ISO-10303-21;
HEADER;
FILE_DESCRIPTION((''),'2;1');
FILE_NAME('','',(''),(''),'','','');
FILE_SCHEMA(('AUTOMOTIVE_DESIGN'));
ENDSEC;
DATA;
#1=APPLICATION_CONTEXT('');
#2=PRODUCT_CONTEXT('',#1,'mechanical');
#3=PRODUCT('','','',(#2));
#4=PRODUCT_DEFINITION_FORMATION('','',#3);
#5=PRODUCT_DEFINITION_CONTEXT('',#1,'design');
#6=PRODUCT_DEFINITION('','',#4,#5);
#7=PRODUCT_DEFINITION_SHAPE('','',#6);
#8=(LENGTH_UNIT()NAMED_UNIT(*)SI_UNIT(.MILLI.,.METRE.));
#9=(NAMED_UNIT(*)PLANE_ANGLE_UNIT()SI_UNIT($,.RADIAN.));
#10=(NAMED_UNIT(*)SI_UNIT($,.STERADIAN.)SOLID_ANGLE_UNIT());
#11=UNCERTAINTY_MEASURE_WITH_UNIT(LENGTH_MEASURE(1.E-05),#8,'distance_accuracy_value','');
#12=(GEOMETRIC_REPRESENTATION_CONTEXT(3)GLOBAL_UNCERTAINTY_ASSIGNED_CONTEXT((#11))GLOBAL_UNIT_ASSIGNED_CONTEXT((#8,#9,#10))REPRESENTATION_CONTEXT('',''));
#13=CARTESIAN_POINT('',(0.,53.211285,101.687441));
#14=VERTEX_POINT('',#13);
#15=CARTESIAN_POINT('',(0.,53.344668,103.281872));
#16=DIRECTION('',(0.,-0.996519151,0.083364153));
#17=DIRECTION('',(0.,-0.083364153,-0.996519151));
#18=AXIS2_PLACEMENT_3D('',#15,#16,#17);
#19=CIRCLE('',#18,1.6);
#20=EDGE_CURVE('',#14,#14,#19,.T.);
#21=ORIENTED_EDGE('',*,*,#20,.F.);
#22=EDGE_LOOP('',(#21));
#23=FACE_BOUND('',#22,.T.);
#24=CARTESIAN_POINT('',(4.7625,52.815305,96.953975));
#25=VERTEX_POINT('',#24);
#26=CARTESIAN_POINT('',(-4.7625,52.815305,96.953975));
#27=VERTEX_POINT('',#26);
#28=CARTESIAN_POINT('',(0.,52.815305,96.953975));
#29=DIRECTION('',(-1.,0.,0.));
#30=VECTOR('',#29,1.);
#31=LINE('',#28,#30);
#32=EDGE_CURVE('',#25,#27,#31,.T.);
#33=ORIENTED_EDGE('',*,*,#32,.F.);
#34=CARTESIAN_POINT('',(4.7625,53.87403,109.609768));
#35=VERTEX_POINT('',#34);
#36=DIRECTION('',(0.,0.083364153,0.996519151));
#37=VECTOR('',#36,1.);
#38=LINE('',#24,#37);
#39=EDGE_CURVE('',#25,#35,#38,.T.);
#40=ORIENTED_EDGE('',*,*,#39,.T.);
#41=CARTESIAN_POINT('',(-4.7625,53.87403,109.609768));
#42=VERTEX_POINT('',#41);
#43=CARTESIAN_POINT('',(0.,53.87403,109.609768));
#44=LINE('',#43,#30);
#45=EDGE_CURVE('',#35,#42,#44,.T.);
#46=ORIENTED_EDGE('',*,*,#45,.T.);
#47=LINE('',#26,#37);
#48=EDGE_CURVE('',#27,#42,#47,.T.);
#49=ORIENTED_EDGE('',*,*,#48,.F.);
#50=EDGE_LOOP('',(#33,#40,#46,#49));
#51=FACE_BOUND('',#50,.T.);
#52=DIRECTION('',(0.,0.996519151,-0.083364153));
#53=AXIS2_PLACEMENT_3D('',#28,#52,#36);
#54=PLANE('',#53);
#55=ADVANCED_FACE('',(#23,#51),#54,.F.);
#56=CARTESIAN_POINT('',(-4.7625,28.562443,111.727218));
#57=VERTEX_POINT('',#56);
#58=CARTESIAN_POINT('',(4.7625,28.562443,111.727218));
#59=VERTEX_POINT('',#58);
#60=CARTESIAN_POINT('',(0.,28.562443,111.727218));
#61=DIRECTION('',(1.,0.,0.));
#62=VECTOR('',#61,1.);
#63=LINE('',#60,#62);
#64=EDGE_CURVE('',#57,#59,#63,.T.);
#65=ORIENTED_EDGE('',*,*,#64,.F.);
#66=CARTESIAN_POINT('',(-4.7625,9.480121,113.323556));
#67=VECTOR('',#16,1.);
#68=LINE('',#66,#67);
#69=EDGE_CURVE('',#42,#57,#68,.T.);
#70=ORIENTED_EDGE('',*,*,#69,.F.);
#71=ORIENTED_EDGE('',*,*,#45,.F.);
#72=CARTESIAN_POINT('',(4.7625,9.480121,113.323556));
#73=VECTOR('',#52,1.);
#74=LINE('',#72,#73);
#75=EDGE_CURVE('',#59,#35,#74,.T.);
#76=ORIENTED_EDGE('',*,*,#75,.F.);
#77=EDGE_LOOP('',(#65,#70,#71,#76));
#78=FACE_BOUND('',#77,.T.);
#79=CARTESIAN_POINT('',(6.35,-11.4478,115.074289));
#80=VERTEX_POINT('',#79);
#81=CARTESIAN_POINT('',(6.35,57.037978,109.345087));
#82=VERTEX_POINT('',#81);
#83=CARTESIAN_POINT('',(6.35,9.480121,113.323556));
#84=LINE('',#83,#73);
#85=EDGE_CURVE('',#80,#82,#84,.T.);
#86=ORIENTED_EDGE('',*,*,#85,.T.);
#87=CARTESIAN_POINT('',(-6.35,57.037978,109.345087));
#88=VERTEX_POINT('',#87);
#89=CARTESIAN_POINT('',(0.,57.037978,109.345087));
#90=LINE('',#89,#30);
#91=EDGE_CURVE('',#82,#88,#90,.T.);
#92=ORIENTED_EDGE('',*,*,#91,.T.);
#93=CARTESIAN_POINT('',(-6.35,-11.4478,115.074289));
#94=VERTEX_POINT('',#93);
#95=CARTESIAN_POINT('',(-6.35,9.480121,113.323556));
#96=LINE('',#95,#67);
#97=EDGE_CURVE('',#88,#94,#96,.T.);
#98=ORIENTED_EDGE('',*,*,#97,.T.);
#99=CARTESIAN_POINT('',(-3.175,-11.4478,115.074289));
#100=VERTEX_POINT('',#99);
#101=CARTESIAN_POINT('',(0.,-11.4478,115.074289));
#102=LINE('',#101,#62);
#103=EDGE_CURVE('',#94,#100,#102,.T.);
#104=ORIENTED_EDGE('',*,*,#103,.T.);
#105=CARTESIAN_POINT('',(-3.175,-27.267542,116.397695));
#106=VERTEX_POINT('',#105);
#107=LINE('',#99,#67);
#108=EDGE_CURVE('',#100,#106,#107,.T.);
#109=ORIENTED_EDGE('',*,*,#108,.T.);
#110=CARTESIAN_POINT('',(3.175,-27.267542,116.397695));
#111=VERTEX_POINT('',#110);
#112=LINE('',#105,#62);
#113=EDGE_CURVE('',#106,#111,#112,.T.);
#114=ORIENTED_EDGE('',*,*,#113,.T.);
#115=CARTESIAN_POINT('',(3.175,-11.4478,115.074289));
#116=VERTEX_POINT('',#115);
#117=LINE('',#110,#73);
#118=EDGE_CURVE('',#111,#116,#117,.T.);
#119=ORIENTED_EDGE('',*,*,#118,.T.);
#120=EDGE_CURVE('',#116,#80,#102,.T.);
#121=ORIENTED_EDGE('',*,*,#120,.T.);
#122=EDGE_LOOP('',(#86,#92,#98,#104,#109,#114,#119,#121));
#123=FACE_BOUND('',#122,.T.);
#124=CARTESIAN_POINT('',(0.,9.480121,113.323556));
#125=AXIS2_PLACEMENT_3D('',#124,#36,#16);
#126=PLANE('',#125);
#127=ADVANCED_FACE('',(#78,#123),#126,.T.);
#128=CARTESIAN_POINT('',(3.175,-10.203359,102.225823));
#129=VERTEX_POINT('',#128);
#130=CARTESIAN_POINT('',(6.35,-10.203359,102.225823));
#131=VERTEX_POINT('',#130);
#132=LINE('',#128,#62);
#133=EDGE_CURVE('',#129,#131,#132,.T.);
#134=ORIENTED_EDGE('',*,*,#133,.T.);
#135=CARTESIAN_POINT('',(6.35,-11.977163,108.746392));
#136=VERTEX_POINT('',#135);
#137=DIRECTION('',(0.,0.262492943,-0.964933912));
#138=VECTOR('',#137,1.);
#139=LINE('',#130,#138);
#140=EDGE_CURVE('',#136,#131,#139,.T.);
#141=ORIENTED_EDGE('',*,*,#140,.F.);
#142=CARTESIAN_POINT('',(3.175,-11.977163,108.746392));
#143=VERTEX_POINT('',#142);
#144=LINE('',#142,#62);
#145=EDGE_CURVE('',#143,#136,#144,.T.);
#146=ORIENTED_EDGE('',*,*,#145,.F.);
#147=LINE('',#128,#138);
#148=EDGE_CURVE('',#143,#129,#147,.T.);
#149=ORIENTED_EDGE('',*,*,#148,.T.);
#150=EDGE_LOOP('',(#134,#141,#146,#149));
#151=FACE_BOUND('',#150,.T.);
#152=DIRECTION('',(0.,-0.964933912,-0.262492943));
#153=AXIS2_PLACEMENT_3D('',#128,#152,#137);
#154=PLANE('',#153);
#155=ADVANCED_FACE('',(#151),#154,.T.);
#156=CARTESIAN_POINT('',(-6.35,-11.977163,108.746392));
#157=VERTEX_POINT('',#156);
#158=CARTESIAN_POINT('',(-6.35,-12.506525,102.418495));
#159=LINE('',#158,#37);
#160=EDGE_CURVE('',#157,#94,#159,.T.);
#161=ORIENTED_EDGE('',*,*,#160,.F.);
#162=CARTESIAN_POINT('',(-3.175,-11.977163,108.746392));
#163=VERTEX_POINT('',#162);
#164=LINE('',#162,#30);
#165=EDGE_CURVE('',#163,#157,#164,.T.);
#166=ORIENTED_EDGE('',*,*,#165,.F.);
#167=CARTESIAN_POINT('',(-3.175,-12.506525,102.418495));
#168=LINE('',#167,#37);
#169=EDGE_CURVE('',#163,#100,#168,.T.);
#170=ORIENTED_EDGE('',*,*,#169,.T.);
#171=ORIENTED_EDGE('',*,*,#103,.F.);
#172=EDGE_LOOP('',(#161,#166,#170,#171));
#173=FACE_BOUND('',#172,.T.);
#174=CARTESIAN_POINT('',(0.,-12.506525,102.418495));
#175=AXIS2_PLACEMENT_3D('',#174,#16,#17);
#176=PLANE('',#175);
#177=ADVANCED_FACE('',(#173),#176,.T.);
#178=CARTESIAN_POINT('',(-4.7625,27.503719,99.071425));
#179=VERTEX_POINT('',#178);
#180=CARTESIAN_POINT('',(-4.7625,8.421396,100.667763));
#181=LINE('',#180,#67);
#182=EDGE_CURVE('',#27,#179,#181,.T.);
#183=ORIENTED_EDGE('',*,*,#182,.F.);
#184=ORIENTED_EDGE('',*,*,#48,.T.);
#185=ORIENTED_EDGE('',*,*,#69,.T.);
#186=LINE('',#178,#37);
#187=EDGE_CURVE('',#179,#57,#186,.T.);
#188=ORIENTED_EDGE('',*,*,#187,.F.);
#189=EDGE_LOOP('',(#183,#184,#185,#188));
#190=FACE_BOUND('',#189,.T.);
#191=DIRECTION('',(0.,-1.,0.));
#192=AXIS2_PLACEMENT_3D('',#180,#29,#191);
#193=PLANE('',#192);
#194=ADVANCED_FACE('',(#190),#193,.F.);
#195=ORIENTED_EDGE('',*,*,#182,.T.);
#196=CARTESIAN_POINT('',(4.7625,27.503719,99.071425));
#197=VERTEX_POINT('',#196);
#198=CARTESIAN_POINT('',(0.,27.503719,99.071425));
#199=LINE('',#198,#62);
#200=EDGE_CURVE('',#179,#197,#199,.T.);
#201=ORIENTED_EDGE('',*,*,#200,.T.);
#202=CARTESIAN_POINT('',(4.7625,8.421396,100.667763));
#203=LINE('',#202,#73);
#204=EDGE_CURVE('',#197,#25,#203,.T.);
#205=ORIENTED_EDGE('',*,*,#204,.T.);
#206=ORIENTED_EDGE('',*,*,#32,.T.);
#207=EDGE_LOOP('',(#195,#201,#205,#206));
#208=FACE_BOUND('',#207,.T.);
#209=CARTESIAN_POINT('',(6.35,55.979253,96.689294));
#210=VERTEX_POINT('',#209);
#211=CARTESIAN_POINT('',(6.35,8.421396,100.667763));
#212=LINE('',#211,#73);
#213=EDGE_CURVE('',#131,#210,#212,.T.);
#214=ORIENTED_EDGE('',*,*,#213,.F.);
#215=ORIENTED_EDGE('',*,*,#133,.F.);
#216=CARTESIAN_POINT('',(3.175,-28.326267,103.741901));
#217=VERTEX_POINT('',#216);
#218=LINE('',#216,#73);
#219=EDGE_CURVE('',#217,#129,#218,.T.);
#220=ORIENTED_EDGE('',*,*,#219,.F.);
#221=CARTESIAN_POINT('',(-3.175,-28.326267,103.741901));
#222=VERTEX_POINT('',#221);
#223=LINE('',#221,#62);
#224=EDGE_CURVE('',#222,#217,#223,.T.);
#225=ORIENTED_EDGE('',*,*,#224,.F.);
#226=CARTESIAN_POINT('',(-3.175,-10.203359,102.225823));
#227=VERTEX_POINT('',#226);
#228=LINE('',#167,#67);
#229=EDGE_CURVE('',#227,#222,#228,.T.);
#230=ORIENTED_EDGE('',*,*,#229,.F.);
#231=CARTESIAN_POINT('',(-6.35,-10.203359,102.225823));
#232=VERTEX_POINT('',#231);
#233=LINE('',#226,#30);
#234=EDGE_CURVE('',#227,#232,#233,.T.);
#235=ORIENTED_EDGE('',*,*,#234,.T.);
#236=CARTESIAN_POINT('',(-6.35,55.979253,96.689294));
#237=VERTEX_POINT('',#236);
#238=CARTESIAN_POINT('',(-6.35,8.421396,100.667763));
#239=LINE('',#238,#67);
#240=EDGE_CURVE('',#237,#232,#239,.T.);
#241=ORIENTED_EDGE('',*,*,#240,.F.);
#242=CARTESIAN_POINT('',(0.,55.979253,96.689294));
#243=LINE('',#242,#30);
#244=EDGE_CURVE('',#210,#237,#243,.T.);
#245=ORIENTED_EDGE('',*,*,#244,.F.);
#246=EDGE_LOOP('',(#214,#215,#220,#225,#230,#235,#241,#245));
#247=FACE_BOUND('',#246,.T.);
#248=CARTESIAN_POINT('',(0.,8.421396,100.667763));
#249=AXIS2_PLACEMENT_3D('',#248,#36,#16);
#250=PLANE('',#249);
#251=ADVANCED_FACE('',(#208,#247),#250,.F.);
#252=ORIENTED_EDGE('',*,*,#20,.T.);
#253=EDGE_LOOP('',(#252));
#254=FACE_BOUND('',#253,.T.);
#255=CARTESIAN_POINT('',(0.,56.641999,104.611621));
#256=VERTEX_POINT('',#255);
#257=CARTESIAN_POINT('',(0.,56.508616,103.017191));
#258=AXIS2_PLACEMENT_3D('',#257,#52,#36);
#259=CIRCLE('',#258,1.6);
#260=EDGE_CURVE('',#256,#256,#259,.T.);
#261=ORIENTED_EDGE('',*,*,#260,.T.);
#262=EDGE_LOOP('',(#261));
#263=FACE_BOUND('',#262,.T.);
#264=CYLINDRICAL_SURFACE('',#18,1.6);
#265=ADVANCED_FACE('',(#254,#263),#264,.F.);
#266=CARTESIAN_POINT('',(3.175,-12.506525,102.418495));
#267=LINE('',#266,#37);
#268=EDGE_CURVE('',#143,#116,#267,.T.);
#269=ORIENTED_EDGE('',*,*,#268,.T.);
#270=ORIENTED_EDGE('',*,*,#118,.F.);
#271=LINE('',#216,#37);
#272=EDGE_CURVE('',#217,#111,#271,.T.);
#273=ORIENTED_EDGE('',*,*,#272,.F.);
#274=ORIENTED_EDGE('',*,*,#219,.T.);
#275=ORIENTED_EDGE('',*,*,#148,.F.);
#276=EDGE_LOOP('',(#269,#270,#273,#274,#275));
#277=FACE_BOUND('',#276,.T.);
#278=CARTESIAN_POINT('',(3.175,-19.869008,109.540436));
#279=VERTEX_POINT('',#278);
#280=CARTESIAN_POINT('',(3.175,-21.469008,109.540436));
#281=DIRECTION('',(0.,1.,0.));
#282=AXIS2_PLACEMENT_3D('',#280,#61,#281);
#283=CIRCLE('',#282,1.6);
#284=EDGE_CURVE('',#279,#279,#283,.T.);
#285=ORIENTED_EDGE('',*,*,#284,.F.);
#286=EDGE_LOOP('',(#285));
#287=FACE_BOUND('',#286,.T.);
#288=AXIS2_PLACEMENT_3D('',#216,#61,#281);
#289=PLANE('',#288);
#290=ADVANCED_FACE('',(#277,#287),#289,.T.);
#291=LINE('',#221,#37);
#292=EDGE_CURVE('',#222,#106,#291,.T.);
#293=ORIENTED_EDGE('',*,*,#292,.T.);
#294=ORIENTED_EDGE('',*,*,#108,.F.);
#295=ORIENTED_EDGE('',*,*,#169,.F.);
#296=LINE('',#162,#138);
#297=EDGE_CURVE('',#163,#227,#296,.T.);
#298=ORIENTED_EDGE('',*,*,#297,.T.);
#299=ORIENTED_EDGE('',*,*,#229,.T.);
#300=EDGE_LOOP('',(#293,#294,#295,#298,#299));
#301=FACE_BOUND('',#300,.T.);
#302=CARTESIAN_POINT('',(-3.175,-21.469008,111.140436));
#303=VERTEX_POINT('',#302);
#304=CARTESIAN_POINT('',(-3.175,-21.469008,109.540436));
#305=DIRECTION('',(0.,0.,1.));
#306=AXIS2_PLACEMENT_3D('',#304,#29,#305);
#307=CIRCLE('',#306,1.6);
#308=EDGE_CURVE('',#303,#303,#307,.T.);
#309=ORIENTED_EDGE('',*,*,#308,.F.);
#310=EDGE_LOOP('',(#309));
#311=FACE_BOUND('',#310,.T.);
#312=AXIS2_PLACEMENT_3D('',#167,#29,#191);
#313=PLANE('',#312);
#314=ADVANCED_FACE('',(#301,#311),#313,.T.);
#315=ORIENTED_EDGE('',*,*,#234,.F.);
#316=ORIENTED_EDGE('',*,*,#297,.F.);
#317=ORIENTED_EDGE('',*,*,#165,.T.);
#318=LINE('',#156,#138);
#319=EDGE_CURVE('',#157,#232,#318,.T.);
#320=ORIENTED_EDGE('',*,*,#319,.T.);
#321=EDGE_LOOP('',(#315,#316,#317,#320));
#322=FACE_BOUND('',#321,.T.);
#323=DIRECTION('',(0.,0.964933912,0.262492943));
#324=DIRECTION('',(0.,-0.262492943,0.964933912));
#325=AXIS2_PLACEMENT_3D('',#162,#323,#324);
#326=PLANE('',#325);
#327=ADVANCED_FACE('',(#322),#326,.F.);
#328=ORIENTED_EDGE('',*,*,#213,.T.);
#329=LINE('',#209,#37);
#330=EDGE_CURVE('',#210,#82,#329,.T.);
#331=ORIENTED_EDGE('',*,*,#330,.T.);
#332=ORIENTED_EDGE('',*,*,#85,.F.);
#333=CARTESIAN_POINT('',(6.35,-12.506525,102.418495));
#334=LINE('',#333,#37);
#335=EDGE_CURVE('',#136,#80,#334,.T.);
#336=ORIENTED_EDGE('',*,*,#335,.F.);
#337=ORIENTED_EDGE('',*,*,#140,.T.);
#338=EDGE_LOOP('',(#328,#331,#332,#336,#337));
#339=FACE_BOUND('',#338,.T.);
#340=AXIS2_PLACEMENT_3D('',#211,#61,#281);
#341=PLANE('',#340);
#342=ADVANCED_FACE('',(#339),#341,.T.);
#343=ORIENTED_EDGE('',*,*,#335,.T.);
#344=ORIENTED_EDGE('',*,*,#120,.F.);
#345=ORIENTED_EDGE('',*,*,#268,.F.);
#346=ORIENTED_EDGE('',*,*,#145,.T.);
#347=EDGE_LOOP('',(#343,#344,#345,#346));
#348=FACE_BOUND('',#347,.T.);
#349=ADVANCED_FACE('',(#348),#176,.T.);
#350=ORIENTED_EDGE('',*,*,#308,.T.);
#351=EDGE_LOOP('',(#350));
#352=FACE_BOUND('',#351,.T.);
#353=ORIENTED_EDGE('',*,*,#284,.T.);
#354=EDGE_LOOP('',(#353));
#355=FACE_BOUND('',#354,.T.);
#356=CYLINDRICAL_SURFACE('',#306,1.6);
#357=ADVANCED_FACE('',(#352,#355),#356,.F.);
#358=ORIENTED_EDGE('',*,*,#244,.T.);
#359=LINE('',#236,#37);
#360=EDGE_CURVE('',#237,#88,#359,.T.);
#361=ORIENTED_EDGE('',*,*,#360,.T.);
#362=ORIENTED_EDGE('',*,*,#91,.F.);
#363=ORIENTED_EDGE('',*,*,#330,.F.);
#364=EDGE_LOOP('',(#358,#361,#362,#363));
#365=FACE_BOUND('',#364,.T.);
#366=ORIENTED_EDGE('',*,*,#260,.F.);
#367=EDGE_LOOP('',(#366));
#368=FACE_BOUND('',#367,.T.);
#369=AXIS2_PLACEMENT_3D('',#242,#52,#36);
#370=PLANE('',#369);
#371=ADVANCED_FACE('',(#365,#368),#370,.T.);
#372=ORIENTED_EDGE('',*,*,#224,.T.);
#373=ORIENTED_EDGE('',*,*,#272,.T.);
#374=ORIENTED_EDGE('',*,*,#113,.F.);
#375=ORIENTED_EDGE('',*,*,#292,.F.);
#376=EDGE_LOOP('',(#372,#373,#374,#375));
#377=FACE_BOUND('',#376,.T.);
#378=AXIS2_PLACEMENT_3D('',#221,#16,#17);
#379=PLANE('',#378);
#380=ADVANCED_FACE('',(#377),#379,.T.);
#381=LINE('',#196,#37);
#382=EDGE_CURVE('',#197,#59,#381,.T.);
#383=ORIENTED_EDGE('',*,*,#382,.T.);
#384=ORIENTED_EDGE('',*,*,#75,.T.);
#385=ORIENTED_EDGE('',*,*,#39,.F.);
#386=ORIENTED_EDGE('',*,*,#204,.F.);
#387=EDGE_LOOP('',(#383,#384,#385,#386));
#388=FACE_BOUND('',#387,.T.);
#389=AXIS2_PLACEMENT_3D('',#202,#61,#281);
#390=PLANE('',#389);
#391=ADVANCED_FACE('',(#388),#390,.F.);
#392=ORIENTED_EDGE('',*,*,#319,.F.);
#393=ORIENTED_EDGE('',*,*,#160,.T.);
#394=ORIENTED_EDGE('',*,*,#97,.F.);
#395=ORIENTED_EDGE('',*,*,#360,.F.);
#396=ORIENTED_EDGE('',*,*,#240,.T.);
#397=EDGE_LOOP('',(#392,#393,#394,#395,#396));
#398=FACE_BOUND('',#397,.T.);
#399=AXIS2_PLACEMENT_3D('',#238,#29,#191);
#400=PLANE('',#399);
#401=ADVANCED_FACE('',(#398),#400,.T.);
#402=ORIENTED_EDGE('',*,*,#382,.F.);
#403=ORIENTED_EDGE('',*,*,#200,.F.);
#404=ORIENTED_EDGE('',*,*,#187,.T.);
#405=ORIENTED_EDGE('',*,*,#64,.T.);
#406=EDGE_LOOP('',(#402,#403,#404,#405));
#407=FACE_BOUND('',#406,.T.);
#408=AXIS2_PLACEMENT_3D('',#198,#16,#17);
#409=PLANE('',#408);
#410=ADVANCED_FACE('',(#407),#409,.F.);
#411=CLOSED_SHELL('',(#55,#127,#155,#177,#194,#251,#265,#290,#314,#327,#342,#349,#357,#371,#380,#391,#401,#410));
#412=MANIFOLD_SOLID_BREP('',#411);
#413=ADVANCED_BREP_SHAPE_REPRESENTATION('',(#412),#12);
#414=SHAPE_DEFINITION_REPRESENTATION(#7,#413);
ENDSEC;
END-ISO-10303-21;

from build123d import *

# Parameters (mm, degrees)
BOSS_EXTRUDE7_START                  = 3.81
SKETCH31_W                           = 68.725
SKETCH31_H                           = 12.7
SKETCH31_W_2                         = 25.4
SKETCH31_H_2                         = 9.525
SKETCH31_W_3                         = 15.875
SKETCH31_H_3                         = 6.35
BOSS_EXTRUDE7_DEPTH                  = 12.7
M3_CLEARANCE_HOLE4_D                 = 3.2
CUT_EXTRUDE3_START                   = 6.35
CUT_EXTRUDE3_DEPTH                   = 3.175
CUT_EXTRUDE4_START                   = -6.35
CUT_EXTRUDE4_DEPTH                   = 3.175
BALL_START                           = 44.54897704
BALL_BALANCER_MASTER_MODEL_OUTLINE_R = 1.6
BALL_BALANCER_MASTER_MODEL_DEPTH     = 3.175


# Read off the part's stored shape, not the designer's step: Ball Balancer Master Model
with BuildPart() as part:
    # Sketch31 → Boss-Extrude7 (new body)
    # profile 1 of 2: a face of its own
    with BuildSketch(Plane(origin=(0, 9.162503731, 109.526818173), x_dir=(0, 0.9965191508346533, -0.08336415308621317), z_dir=(0, 0.08336415308621317, 0.9965191508346533)).offset(BOSS_EXTRUDE7_START)):
        with Locations((13.36147704, 0)):
            Rectangle(SKETCH31_W, SKETCH31_H)
        with Locations((31.84897704, 0)):
            Rectangle(SKETCH31_W_2, SKETCH31_H_2, mode=Mode.SUBTRACT)
    # profile 2 of 2: a face of its own
    with BuildSketch(Plane(origin=(0, 9.162503731, 109.526818173), x_dir=(0, 0.9965191508346533, -0.08336415308621317), z_dir=(0, 0.08336415308621317, 0.9965191508346533)).offset(BOSS_EXTRUDE7_START)):
        with Locations((-28.93852296, 0)):
            Rectangle(SKETCH31_W_3, SKETCH31_H_3)
    extrude(amount=-BOSS_EXTRUDE7_DEPTH)

    # M3 Clearance Hole4 (through all)
    with Locations(Plane.ZY.offset(3.175)):
        with Locations((-85.094578454, 48.544265488), (109.540435581, -21.469007696)):
            Hole(M3_CLEARANCE_HOLE4_D / 2)

    # Sketch35 → Cut-Extrude3 (cut)
    with BuildSketch(Plane.ZY.offset(CUT_EXTRUDE3_START)):
        Polygon((108.746392023, -11.977162785), (102.225823269, -10.203359146), (102.418495416, -12.506525157), align=None)
    extrude(amount=-CUT_EXTRUDE3_DEPTH, mode=Mode.SUBTRACT)

    # Sketch36 → Cut-Extrude4 (cut)
    with BuildSketch(Plane.ZY.offset(CUT_EXTRUDE4_START)):
        Polygon((102.225823269, -10.203359146), (108.746392023, -11.977162785), (102.418495416, -12.506525157), align=None)
    extrude(amount=CUT_EXTRUDE4_DEPTH, mode=Mode.SUBTRACT)

    # Ball Balancer Master Model outline → Ball Balancer Master Model (cut)
    with BuildSketch(Plane(origin=(0, 0, 0), x_dir=(1, 0, 0), z_dir=(0, 0.9965191508346533, -0.08336415308621321)).offset(BALL_START)):
        with Locations((0, -107.369396203)):
            Circle(BALL_BALANCER_MASTER_MODEL_OUTLINE_R)
    extrude(amount=BALL_BALANCER_MASTER_MODEL_DEPTH, mode=Mode.SUBTRACT)


solid = part.part
